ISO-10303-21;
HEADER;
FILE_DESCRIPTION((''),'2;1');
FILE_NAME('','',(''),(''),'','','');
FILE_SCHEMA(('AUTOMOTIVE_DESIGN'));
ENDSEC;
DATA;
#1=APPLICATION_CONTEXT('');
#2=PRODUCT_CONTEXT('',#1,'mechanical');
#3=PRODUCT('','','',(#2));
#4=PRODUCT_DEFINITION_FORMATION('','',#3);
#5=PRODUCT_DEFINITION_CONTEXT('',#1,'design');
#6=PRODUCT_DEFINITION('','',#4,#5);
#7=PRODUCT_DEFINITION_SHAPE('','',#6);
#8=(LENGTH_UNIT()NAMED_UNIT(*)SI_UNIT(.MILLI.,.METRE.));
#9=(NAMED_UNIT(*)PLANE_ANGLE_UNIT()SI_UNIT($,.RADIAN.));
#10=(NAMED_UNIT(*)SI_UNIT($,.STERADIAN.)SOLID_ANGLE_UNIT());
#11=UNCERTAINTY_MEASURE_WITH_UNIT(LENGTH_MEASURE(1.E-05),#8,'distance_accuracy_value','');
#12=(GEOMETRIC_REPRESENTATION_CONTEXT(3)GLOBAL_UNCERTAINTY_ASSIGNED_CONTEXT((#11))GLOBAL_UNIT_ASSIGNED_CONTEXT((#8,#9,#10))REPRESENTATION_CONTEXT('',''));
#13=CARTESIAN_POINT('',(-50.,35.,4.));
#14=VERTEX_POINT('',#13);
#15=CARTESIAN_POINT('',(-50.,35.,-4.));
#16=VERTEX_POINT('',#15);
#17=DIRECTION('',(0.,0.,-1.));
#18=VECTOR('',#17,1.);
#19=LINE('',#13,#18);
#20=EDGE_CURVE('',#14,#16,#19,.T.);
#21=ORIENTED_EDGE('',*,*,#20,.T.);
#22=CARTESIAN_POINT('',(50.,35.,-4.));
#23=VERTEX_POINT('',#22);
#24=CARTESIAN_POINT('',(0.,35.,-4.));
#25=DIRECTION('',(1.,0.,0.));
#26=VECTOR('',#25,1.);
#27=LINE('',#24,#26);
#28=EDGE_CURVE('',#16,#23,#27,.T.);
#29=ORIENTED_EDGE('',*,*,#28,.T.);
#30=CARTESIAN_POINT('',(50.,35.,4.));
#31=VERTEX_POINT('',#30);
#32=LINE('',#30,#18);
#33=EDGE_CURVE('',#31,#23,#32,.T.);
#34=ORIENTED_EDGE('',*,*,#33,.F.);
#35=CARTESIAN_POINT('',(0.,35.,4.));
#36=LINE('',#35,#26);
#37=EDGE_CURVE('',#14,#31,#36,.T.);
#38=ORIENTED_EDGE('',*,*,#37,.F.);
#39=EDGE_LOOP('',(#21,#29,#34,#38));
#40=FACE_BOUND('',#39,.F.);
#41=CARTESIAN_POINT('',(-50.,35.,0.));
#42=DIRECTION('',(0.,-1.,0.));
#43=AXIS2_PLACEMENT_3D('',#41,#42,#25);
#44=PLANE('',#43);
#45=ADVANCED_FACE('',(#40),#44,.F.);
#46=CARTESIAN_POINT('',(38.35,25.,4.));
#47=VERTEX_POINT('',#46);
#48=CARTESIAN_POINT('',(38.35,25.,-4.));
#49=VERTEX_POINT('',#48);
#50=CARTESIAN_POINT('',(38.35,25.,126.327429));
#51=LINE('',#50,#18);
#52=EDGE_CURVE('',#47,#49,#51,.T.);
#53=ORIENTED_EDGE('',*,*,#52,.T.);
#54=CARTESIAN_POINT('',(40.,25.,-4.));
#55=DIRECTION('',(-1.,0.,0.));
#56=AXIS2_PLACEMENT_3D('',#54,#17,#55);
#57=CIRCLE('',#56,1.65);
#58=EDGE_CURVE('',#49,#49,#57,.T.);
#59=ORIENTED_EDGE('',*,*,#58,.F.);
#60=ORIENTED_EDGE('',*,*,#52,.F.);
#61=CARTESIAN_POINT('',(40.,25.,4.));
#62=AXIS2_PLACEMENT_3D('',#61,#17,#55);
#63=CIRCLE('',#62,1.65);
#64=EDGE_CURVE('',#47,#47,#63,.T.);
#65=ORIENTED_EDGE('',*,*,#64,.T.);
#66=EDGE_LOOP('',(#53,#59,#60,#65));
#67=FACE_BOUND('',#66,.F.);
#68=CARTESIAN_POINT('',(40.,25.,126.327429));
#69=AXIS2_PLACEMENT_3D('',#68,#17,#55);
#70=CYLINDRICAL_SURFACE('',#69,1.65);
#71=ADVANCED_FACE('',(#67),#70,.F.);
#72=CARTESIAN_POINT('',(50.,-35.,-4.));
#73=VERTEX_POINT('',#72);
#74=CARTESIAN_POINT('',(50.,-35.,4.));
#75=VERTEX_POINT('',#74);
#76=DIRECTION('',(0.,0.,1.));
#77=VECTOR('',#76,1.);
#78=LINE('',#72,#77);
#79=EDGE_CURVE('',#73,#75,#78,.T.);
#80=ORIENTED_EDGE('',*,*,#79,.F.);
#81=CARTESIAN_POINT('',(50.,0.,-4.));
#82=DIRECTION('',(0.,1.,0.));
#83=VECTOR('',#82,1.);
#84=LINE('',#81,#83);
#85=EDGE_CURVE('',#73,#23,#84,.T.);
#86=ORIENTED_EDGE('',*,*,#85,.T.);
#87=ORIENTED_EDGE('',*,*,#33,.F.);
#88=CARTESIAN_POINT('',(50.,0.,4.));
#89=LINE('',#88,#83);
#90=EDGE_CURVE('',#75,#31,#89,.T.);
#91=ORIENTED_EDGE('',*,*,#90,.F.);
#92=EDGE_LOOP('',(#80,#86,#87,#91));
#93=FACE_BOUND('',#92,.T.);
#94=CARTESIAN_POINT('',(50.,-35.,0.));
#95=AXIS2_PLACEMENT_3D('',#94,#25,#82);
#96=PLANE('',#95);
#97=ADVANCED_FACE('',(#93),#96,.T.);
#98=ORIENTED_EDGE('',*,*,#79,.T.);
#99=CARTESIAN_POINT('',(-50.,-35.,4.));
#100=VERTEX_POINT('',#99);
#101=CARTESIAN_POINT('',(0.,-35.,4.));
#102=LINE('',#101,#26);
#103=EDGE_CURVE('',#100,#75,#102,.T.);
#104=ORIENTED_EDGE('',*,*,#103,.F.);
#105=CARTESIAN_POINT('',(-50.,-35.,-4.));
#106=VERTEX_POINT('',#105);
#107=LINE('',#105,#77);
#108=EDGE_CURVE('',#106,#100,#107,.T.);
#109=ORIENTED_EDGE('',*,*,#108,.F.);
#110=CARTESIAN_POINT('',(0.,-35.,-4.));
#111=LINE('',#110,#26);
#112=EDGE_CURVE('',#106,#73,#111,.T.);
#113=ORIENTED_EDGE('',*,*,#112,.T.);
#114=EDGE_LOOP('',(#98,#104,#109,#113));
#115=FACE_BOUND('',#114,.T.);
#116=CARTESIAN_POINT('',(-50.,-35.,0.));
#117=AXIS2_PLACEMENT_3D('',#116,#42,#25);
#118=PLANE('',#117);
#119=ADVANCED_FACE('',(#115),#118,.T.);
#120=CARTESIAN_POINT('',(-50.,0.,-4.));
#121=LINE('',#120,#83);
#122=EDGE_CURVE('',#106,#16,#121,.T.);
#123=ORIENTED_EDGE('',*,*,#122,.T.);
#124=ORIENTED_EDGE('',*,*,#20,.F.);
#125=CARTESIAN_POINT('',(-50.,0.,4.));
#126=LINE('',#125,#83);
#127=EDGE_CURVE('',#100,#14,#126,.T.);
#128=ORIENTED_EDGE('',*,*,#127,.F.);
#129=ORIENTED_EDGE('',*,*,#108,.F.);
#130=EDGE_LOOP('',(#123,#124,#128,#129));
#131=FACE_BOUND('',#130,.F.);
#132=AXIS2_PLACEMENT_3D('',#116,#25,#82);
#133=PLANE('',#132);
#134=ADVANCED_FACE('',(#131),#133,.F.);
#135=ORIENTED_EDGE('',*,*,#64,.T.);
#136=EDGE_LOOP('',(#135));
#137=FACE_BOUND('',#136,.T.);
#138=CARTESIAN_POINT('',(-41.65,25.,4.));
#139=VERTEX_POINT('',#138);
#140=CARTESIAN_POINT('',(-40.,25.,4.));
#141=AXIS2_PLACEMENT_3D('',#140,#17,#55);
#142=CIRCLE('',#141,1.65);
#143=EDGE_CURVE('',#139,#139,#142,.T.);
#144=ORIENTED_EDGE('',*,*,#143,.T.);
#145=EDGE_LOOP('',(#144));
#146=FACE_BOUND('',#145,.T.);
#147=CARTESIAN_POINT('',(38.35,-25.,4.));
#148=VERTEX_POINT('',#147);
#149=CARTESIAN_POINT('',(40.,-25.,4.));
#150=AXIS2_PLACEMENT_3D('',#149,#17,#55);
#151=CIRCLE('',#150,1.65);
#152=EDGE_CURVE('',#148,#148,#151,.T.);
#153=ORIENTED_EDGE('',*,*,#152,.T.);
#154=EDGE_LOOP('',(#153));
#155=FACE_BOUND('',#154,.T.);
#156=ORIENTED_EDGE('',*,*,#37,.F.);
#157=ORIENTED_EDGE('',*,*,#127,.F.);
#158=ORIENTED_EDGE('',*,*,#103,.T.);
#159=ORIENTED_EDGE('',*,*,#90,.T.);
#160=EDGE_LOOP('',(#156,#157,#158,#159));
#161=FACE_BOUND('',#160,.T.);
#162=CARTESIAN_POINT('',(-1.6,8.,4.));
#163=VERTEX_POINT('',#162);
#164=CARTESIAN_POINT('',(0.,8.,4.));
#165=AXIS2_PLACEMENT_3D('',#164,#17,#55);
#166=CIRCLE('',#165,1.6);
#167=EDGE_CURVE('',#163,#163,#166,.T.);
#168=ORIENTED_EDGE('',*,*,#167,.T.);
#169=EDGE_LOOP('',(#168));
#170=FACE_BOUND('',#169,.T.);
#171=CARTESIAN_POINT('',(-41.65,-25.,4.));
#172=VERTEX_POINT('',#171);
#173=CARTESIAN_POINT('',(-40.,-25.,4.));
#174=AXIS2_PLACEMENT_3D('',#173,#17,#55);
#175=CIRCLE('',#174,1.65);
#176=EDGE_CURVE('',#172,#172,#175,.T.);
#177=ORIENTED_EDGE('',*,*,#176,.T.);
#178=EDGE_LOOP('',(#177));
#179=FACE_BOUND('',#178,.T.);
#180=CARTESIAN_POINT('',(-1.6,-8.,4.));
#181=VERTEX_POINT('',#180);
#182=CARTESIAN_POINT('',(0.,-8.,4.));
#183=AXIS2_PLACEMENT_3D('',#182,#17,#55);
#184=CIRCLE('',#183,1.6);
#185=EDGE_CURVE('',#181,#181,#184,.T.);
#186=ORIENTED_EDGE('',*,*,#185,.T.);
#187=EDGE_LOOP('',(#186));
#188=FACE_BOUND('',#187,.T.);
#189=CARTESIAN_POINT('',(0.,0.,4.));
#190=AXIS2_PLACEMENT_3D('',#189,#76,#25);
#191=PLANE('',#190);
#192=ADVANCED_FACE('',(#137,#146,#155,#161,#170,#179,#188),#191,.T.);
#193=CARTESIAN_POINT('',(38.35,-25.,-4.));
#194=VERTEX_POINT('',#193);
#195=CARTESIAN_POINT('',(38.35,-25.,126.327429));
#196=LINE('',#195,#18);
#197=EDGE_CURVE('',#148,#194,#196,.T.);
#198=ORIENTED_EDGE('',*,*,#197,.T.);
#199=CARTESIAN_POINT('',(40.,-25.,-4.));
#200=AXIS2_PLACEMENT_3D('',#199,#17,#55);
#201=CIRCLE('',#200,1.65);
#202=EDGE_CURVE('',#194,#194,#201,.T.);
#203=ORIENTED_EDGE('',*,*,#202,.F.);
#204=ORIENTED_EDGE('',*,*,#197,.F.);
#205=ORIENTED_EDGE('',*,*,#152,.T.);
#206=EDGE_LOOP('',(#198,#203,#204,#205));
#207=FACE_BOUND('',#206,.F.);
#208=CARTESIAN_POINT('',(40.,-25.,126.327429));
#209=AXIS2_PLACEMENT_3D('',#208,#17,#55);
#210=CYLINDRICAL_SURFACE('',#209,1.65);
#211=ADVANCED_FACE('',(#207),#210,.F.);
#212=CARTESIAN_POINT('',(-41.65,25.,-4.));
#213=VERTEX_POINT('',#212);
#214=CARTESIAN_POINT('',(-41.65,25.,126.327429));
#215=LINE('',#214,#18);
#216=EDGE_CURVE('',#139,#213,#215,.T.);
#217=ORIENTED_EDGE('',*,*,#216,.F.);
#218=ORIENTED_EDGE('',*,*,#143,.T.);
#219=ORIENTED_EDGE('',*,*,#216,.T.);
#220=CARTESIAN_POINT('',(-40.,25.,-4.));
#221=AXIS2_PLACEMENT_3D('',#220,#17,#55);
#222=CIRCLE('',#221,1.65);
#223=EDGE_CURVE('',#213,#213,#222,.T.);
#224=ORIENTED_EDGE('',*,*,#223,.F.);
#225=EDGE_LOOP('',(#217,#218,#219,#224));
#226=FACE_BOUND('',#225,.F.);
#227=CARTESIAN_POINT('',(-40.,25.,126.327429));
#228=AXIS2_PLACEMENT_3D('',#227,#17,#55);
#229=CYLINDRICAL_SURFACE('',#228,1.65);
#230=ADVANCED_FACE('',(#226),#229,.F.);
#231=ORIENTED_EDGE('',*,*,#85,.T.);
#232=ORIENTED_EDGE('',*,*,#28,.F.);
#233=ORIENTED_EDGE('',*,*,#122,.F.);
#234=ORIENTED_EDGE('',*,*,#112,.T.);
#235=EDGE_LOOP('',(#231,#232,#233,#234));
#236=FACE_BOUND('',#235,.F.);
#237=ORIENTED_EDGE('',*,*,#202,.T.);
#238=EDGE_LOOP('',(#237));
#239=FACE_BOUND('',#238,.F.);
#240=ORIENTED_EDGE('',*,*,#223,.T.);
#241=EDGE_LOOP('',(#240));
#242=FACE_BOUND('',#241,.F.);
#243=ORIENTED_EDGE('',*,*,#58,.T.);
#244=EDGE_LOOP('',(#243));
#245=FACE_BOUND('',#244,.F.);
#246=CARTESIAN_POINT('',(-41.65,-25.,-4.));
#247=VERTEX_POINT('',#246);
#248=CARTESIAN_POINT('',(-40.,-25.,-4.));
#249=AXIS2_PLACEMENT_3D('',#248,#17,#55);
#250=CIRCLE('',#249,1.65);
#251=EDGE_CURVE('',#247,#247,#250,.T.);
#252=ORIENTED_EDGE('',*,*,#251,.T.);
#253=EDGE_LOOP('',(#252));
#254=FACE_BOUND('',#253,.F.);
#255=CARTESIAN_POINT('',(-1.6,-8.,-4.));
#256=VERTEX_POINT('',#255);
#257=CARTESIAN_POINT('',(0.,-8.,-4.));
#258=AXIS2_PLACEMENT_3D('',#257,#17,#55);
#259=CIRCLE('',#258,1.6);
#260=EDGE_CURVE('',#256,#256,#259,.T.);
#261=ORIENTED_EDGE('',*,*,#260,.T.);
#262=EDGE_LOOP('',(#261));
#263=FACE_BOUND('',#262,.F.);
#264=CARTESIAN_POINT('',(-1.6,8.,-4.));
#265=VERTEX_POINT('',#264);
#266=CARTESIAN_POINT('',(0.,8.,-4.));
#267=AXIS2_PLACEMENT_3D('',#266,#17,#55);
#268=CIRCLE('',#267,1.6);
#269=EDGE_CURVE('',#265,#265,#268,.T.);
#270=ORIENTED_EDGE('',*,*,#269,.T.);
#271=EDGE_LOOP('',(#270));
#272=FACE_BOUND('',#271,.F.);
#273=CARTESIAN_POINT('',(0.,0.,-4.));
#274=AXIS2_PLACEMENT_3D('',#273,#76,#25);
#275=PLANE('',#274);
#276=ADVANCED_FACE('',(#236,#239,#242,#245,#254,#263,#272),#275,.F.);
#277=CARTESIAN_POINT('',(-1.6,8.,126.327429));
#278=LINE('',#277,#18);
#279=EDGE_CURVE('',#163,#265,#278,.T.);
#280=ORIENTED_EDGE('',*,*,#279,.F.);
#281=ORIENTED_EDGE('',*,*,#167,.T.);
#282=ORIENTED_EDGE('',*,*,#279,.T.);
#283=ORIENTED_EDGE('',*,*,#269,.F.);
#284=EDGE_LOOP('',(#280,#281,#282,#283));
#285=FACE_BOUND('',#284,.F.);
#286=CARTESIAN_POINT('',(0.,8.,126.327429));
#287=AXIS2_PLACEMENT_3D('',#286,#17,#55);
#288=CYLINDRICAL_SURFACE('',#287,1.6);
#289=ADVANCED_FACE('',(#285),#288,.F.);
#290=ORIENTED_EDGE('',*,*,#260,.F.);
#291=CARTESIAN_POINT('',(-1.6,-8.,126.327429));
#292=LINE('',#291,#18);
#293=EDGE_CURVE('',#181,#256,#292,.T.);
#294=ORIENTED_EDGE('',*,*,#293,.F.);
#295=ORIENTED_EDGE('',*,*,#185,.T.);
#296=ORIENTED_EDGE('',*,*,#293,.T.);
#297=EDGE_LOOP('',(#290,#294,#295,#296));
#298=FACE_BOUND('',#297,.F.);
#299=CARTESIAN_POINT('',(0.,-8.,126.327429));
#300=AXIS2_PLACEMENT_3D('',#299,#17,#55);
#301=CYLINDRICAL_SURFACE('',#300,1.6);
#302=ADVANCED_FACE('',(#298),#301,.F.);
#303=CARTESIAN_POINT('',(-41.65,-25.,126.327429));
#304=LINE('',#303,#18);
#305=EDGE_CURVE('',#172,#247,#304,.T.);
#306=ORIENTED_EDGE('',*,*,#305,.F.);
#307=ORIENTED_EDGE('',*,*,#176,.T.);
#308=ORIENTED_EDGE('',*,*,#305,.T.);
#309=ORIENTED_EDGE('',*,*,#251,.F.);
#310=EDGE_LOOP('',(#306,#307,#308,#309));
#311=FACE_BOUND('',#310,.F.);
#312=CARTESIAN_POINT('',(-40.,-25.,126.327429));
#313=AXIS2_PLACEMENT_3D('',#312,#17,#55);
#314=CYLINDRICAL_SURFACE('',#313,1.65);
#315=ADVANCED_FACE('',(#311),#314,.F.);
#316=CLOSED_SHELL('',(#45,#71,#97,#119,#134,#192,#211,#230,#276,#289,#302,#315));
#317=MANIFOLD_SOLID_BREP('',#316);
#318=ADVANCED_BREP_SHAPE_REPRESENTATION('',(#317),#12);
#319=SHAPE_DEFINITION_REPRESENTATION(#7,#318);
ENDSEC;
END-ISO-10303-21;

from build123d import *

# Parameters (mm, degrees)
F0_W     = 100
F0_H     = 70
F1_DEPTH = 4
F3_D     = 3.3
F4_D     = 3.2


with BuildPart() as f1:
    # F0 (on Top) → F1 (new body, symmetric)
    with BuildSketch(Plane.XY):
        Rectangle(F0_W, F0_H)
    extrude(amount=F1_DEPTH, both=True)

    # F3 (through all)
    with Locations(Plane.XY.offset(4)):
        with Locations((40, 25), (40, -25), (-40, -25), (-40, 25)):
            Hole(F3_D / 2)

    # F4 (through all)
    with Locations(Plane.XY.offset(4)):
        with Locations((0, 8), (0, -8)):
            Hole(F4_D / 2)


solid = f1.part
